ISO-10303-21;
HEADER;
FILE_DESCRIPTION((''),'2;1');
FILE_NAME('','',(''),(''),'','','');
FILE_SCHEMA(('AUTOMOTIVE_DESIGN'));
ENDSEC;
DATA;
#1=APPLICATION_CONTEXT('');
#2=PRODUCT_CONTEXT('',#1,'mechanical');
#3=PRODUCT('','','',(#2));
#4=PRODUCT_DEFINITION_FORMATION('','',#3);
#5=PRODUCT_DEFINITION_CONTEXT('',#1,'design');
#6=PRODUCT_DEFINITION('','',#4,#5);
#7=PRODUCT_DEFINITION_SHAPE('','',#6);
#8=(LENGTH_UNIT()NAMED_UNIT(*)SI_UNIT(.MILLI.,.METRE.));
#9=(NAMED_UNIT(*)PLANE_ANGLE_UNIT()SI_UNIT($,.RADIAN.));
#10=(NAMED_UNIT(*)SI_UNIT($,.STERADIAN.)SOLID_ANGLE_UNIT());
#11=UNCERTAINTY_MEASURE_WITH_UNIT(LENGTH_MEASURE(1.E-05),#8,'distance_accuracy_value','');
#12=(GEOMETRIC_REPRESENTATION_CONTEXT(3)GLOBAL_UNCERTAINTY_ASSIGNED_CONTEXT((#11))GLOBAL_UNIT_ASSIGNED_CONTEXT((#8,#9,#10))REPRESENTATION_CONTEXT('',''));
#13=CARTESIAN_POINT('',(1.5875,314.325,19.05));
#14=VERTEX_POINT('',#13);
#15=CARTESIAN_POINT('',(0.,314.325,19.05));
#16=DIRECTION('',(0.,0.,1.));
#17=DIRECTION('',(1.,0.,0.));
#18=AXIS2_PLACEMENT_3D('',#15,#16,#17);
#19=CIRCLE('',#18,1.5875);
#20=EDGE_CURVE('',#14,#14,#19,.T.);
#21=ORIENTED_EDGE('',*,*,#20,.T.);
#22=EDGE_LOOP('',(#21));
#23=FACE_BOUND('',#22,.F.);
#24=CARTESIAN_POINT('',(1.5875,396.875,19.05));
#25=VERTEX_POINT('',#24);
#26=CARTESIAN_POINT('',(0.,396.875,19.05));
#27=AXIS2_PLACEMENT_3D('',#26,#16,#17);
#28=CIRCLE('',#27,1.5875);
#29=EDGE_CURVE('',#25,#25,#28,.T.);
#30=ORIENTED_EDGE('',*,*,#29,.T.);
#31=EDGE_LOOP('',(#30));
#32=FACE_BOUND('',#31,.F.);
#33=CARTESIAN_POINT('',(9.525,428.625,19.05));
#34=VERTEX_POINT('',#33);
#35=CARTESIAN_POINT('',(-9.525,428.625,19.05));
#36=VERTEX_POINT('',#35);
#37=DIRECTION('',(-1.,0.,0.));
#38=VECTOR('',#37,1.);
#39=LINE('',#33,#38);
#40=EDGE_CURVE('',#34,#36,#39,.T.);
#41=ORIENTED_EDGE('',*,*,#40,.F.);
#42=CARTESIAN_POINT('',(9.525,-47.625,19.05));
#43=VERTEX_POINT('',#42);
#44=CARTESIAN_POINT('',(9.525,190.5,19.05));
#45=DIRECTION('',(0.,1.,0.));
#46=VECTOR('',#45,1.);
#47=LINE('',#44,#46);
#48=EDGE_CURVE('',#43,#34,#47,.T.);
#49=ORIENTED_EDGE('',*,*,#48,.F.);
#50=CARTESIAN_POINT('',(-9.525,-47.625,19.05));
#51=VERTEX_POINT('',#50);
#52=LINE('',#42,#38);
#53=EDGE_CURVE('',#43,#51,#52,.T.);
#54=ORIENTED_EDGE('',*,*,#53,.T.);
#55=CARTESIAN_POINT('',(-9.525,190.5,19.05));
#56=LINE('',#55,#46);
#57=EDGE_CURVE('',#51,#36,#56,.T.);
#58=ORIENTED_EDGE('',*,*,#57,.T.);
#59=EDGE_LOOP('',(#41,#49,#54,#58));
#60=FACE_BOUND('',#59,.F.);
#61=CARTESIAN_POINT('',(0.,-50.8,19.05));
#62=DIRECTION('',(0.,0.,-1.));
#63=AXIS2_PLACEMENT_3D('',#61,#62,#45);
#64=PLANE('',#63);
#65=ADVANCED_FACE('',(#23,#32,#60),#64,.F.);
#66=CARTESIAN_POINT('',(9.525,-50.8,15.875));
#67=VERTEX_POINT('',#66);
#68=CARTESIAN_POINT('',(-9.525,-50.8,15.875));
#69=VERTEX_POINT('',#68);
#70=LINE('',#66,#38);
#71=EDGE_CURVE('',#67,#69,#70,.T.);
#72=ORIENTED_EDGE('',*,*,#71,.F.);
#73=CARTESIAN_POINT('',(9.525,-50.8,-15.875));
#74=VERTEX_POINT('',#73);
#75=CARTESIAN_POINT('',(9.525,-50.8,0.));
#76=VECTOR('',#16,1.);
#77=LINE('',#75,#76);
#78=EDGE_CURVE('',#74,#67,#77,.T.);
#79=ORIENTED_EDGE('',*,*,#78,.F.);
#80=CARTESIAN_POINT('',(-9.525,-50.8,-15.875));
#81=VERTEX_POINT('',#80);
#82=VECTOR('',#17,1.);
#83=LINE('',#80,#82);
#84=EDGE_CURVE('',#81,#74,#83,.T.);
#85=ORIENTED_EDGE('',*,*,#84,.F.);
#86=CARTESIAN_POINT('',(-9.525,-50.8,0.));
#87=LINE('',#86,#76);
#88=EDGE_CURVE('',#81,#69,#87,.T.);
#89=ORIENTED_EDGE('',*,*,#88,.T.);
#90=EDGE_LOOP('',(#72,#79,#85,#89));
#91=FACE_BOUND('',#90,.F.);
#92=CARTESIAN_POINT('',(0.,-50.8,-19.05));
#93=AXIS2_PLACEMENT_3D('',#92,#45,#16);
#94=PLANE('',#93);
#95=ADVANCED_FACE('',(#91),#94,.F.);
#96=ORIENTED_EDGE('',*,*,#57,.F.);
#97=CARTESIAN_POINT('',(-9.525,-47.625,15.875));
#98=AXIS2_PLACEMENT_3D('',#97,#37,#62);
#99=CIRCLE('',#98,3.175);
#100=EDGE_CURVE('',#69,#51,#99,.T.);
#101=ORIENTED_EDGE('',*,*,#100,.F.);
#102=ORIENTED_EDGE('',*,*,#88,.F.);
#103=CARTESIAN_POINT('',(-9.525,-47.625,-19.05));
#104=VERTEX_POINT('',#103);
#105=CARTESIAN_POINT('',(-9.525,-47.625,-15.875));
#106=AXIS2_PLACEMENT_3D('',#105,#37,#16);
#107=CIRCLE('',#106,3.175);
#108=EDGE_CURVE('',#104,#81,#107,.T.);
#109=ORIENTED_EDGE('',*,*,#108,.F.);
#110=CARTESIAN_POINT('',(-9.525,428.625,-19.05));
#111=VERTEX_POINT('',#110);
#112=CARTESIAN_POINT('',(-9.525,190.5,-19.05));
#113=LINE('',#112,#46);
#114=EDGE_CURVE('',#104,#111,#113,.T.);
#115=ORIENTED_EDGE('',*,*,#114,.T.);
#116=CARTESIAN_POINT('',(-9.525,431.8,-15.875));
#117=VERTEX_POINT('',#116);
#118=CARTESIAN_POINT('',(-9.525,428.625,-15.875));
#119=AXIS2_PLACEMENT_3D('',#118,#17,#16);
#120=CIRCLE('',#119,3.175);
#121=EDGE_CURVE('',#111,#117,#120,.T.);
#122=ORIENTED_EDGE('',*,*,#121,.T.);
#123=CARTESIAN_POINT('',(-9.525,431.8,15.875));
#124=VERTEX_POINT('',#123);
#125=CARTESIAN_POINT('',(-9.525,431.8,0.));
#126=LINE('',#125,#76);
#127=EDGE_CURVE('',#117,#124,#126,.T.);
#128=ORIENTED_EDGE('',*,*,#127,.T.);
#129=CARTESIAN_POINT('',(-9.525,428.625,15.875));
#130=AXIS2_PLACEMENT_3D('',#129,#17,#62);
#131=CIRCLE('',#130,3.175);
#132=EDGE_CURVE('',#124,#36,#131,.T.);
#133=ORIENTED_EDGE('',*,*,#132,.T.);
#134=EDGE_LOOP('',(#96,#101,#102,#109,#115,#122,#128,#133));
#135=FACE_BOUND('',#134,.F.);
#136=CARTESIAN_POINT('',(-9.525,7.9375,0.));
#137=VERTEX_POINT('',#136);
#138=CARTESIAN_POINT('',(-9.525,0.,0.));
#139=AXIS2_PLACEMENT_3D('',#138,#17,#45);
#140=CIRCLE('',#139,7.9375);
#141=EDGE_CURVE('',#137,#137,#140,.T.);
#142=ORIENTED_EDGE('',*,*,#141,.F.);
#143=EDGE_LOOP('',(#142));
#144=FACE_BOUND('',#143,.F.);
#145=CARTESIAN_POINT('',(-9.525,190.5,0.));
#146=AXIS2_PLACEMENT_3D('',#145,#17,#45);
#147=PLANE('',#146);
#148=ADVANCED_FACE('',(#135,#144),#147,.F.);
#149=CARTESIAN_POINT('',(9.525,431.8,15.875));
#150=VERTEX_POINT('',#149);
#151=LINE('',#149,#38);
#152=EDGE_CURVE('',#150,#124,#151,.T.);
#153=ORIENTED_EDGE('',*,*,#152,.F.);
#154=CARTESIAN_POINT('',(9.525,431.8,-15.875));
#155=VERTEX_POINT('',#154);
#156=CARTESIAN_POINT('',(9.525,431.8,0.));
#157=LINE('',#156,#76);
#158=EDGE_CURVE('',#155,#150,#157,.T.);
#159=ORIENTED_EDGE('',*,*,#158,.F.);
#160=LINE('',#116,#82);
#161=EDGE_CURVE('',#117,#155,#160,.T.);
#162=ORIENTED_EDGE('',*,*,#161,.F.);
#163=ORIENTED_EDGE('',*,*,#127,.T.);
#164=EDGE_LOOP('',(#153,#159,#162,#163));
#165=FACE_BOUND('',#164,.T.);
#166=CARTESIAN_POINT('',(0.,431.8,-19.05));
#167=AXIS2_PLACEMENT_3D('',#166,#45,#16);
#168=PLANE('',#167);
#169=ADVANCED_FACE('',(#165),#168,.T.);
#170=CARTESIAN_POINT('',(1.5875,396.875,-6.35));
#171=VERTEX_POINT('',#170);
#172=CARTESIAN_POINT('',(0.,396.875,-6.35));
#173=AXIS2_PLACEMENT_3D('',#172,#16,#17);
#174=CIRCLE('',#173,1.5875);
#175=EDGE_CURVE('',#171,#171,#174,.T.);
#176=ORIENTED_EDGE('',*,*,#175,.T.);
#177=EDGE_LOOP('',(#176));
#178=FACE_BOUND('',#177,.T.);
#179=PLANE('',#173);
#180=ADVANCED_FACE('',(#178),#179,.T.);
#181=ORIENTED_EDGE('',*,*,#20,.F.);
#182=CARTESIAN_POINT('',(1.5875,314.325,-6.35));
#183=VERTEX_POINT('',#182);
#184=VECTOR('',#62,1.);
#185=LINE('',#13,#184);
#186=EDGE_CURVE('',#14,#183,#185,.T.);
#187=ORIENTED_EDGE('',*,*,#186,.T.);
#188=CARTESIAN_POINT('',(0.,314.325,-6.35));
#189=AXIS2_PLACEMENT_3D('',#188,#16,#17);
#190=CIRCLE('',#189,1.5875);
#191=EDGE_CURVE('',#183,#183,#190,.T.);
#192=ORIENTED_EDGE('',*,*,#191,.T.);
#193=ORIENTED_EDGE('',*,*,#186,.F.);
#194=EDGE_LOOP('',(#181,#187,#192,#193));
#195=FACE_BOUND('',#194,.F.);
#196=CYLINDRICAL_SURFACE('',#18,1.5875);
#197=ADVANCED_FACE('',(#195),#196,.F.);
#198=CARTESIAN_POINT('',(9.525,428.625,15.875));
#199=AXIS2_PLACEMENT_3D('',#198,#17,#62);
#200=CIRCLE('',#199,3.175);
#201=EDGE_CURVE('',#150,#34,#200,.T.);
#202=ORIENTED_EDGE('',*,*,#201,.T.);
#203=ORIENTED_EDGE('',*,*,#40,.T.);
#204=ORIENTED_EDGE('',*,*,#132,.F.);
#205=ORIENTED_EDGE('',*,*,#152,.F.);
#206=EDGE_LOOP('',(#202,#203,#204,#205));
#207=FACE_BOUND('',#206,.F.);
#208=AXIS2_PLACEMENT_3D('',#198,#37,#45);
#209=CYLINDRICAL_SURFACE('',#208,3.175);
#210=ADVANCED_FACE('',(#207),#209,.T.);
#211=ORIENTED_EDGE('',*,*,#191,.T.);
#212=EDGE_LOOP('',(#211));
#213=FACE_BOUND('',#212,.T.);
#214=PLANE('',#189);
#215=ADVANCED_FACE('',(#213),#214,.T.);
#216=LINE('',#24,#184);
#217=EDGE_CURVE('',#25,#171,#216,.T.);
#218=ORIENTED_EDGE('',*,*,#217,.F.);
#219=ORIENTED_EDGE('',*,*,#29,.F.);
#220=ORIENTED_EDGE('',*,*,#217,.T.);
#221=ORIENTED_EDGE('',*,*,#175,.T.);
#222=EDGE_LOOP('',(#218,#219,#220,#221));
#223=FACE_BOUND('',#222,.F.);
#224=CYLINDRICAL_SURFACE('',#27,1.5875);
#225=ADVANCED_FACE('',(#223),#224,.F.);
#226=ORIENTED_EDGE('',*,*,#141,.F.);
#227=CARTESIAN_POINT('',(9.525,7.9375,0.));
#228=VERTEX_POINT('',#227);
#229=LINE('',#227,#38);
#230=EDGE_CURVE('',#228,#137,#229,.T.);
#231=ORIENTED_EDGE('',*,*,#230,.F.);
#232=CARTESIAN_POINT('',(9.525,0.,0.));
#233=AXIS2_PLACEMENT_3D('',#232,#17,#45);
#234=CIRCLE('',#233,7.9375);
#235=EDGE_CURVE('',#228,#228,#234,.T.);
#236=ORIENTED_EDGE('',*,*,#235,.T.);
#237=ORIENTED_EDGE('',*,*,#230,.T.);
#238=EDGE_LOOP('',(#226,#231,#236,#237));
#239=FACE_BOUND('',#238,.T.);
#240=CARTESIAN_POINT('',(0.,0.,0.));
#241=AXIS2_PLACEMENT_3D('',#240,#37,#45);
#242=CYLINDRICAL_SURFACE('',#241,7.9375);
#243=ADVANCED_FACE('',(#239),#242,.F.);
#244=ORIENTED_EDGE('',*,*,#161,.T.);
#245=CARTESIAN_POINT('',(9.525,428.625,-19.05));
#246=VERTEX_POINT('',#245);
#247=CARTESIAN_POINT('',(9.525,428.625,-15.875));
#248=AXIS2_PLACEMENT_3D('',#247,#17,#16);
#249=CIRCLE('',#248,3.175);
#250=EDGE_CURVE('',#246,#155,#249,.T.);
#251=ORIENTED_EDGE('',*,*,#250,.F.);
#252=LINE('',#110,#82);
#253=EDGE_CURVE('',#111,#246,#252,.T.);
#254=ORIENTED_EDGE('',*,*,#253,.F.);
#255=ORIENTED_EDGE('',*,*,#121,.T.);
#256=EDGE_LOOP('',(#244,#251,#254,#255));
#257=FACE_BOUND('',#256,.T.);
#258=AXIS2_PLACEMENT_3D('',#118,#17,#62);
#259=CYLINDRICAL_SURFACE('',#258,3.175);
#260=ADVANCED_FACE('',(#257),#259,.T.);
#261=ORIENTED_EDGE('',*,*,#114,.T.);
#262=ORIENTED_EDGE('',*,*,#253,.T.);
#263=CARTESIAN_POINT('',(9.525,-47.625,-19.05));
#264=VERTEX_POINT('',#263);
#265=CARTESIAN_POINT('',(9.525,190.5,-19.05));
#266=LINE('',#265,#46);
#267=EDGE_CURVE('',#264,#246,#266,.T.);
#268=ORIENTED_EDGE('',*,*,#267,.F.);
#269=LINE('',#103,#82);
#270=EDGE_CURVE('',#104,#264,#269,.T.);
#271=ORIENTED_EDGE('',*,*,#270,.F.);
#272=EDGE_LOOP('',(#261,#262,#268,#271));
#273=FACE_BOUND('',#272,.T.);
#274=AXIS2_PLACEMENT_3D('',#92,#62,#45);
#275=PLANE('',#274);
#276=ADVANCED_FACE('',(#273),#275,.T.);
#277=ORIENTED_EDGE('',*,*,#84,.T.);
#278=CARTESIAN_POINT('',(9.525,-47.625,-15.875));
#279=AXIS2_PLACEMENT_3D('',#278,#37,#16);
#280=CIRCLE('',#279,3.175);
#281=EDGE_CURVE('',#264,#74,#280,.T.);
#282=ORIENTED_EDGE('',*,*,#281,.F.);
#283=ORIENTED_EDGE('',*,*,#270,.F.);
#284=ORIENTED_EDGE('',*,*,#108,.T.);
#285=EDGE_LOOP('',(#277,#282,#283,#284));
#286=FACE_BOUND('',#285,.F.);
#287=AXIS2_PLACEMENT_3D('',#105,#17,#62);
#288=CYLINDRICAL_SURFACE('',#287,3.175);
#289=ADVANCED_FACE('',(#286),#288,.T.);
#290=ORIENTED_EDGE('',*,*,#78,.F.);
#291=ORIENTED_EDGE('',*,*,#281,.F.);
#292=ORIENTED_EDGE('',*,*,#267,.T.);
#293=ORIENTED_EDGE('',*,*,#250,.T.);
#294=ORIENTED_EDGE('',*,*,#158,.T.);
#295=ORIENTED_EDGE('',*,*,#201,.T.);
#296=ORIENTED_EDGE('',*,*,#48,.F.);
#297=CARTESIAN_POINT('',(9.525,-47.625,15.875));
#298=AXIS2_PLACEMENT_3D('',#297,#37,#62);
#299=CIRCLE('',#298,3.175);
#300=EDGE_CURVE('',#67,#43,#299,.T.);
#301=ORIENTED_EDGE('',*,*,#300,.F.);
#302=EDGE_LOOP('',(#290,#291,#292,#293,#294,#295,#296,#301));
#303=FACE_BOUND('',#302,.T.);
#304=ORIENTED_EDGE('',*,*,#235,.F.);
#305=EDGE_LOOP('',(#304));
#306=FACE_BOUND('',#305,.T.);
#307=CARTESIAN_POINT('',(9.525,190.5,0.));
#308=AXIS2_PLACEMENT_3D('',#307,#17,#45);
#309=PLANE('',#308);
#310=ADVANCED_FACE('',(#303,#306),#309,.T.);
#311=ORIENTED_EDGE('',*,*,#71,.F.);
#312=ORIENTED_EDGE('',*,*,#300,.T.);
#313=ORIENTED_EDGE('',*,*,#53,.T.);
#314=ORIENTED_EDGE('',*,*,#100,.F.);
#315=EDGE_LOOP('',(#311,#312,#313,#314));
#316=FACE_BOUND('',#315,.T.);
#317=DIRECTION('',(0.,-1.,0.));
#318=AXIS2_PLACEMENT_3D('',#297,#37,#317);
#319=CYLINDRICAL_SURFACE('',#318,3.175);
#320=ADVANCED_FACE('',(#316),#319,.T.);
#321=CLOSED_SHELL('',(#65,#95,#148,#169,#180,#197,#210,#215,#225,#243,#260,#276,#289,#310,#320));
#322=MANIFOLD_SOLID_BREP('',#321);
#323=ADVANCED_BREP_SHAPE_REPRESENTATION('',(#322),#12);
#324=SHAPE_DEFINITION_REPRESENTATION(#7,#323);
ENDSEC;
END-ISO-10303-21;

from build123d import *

# Parameters (mm, degrees)
F0_W     = 482.6
F0_H     = 38.1
F0_R     = 7.9375
F1_DEPTH = 9.525
F2_R     = 1.5875
F3_DEPTH = 25.4
F4_R     = 3.175
F5_R     = 3.175


with BuildPart() as f1:
    # F0 (on Right) → F1 (new body, symmetric)
    with BuildSketch(Plane.YZ):
        with Locations((190.5, 0)):
            Rectangle(F0_W, F0_H)
        Circle(F0_R, mode=Mode.SUBTRACT)
    extrude(amount=F1_DEPTH, both=True)

    # F2 (on face) → F3 (cut)
    with BuildSketch(Plane.XY.offset(19.05)):
        with Locations((0, 396.875)):
            Circle(F2_R)
        with Locations((0, 314.325)):
            Circle(F2_R)
    extrude(amount=-F3_DEPTH, mode=Mode.SUBTRACT)

    # F4
    f4_edges = [f1.edges().sort_by_distance(p)[0] for p in [
        (0, 431.8, -19.05),
    ]]
    fillet(f4_edges, radius=F4_R)

    # F5
    f5_edges = [f1.edges().sort_by_distance(p)[0] for p in [
        (0, 431.8, 19.05),
        (0, -50.8, -19.05),
        (0, -50.8, 19.05),
    ]]
    fillet(f5_edges, radius=F5_R)


solid = f1.part
